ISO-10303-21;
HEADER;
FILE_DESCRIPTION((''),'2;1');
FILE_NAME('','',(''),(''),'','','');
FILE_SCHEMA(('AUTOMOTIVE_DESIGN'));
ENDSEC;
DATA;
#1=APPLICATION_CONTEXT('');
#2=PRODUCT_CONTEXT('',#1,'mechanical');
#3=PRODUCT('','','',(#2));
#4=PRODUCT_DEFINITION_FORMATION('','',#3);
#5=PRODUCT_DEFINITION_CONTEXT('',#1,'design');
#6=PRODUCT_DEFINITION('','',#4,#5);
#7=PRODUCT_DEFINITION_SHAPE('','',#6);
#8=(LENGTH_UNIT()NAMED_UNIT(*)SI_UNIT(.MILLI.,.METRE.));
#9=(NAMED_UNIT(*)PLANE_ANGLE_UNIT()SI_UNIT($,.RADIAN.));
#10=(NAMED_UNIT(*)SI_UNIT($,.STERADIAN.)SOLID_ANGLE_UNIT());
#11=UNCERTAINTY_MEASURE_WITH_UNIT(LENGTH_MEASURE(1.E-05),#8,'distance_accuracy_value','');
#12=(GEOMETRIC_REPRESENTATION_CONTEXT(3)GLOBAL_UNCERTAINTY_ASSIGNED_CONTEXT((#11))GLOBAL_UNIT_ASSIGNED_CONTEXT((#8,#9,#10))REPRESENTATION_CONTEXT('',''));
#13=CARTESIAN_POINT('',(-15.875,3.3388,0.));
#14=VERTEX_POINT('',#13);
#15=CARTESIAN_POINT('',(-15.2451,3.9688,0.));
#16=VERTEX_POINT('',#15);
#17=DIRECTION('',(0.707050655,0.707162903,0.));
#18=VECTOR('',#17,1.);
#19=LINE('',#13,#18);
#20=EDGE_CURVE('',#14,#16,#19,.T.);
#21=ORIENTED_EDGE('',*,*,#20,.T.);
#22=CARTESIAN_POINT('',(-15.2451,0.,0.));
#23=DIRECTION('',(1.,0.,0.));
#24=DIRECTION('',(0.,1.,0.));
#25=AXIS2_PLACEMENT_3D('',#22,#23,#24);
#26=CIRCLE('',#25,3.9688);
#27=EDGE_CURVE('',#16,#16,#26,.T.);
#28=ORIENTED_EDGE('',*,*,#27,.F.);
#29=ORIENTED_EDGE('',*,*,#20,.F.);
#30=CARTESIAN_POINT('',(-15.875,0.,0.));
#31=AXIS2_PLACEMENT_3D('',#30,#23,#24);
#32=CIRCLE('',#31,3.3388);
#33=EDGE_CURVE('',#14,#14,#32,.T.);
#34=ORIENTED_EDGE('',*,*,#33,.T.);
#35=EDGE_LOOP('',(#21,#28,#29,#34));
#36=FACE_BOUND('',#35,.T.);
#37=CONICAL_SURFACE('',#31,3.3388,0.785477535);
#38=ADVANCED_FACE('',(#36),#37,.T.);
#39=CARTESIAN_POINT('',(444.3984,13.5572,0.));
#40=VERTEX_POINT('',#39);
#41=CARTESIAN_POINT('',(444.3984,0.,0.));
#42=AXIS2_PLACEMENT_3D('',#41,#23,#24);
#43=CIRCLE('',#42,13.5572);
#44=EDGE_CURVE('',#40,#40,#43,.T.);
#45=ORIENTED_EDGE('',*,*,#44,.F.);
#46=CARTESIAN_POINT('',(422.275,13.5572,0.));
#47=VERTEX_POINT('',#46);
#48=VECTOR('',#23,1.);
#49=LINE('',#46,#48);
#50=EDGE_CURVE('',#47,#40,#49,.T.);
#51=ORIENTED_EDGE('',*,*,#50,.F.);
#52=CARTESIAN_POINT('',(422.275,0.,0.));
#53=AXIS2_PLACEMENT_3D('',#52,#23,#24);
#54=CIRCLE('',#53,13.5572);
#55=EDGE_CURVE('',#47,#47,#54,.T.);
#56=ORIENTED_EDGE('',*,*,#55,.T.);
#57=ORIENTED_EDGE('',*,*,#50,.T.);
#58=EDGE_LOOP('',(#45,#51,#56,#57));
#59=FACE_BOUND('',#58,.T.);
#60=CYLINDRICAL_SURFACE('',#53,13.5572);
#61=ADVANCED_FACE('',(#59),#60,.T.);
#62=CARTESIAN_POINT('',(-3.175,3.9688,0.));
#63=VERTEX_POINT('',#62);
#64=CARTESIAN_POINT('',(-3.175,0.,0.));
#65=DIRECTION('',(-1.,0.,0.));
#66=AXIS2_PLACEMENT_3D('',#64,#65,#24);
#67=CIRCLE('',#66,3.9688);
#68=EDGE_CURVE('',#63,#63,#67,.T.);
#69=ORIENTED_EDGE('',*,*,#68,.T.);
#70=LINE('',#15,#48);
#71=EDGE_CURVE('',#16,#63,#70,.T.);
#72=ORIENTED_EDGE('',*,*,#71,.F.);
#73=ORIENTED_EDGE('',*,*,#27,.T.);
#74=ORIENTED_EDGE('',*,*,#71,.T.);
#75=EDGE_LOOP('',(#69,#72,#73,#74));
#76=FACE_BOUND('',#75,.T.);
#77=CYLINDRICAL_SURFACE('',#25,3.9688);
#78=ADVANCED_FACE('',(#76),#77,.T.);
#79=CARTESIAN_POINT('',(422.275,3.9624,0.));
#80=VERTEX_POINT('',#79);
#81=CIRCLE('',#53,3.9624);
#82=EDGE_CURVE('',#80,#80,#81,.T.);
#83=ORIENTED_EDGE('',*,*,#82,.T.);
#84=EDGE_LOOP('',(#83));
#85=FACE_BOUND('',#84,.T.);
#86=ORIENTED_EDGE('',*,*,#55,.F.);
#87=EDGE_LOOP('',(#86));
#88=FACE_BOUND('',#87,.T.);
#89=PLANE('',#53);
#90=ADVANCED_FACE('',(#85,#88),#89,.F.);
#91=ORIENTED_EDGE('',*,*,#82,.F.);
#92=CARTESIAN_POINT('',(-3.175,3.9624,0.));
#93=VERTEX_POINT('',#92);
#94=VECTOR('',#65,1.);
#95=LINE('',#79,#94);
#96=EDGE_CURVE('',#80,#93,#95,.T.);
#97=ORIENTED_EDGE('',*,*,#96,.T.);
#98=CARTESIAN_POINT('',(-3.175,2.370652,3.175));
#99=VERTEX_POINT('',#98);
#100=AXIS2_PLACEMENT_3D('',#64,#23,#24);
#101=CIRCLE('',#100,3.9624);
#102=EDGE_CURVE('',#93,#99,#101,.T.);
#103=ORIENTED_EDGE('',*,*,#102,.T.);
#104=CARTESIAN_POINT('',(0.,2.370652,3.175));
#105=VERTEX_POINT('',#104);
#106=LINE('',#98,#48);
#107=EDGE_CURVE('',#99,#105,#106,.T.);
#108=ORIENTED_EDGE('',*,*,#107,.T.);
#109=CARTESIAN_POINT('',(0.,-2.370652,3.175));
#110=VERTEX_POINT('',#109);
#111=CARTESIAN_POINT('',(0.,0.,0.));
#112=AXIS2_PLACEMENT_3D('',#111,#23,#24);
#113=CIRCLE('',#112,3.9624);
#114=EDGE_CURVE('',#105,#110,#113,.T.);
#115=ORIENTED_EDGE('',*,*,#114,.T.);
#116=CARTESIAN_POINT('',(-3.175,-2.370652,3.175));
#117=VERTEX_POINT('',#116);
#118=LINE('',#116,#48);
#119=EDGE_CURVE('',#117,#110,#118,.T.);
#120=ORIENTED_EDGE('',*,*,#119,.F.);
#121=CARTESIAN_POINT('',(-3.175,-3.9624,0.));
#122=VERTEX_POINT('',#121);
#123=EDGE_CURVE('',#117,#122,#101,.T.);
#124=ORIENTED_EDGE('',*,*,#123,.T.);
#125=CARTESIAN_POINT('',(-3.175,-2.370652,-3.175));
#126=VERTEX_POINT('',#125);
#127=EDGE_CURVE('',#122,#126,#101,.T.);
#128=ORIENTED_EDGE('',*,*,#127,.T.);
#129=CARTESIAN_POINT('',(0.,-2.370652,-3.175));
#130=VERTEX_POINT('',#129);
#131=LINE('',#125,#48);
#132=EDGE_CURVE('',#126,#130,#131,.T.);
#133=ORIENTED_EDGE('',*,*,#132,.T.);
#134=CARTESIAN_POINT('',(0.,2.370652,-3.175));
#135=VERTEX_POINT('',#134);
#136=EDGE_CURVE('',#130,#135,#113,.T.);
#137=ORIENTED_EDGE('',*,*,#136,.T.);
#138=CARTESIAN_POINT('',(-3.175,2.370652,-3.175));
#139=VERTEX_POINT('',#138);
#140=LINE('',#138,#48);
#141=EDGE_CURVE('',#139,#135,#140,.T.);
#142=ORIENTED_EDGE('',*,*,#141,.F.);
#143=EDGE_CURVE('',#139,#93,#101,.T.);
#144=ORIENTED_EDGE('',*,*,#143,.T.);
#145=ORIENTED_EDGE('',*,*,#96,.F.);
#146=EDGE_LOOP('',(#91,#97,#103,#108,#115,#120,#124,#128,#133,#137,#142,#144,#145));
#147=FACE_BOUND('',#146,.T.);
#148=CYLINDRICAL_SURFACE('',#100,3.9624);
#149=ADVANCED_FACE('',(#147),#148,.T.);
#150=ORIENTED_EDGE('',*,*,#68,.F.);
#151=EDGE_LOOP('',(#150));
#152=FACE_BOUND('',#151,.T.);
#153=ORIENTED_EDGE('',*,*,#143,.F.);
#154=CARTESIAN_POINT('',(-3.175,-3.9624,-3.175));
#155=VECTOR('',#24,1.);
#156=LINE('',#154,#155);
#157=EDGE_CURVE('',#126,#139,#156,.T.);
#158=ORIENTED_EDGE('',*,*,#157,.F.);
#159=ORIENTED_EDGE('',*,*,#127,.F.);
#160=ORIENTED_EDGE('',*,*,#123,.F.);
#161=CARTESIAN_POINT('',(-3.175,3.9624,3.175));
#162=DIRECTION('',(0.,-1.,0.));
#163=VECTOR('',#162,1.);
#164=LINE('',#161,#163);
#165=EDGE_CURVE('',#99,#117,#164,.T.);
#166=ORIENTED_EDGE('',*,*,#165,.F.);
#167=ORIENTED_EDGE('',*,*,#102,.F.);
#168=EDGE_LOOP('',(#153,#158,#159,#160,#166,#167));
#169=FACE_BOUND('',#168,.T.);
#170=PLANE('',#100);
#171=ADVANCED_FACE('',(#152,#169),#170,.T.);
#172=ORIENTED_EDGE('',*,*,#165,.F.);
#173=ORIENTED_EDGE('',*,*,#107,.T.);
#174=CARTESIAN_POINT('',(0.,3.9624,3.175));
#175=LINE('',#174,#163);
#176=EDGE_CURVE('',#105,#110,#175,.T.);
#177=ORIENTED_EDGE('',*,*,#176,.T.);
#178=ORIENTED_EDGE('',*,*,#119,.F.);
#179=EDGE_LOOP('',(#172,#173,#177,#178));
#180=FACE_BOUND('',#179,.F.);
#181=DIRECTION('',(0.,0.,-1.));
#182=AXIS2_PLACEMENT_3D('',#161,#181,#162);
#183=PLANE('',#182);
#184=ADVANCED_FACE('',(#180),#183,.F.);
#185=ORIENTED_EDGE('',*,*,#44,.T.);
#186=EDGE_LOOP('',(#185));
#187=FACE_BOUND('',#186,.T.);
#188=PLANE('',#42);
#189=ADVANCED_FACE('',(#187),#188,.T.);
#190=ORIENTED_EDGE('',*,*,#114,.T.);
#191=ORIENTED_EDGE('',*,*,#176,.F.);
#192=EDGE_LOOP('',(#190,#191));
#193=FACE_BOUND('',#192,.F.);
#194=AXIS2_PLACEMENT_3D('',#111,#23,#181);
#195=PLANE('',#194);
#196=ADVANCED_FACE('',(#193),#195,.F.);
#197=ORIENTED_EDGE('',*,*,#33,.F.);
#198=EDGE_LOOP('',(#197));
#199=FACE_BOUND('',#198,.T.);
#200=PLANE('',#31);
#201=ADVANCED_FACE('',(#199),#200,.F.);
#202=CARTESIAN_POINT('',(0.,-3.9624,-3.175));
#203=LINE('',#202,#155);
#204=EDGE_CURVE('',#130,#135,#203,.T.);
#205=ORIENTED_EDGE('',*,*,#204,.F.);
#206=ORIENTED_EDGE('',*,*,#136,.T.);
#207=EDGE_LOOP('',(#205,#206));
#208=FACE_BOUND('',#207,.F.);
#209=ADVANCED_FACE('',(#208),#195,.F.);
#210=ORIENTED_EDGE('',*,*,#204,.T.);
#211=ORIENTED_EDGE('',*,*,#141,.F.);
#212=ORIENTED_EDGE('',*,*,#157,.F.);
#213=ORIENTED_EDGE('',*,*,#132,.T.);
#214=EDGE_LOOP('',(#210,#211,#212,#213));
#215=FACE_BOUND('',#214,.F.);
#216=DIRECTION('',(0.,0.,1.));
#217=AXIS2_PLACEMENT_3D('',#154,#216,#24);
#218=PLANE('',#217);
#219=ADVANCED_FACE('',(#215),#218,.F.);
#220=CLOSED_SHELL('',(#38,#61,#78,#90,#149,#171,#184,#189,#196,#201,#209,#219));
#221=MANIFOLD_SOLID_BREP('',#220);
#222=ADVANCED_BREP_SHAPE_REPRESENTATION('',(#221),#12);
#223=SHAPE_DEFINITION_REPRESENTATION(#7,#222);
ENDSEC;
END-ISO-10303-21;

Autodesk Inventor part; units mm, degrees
sketch "Sketch_1" plane through (0, 0, 0) normal (0, 0, 1) x (1, 0, 0)
  line L0 (444.3984, 0) -> (-3.175, 0)
  line L1 (-3.175, 0) -> (-3.175, 3.9624)
  line L2 (-3.175, 3.9624) -> (422.275, 3.9624)
  line L3 (422.275, 3.9624) -> (422.275, 13.5572)
  line L4 (422.275, 13.5572) -> (444.3984, 13.5572)
  line L5 (444.3984, 13.5572) -> (444.3984, 0)
  line L6 (444.3984, 0) -> (-3.175, 0)
revolve "Revolution1" add sketch "Sketch_1" angle 360 about axis through (444.3984, 0, 0) along (1, 0, 0)
sketch "Sketch_3" plane through (0, 0, 0) normal (0, 0, 1) x (1, 0, 0)
  line L0 (-3.175, 0) -> (-15.875, 0)
  line L1 (-15.875, 0) -> (-15.875, 3.3388)
  line L2 (-15.875, 3.3388) -> (-15.2451, 3.9688)
  line L3 (-15.2451, 3.9688) -> (-3.175, 3.9688)
  line L4 (-3.175, 3.9688) -> (-3.175, 0)
  line L5 (-3.175, 0) -> (-15.875, 0)
revolve "Revolution2" add sketch "Sketch_3" angle 360 about axis through (-3.175, 0, 0) along (1, 0, 0)
thread "Thread1" size "5/16-20 UN" class "3A" standard "ANSI Unified Screw Threads" full length
sketch "Sketch_10" plane through (-3.175, 0, 0) normal (1, 0, 0) x (0, 0, -1)
  line L0 (-7.9248, 7.9248) -> (-7.9248, -7.9248)
  line L1 (-7.9248, -7.9248) -> (7.9248, -7.9248)
  line L2 (7.9248, -7.9248) -> (7.9248, 7.9248)
  line L3 (7.9248, 7.9248) -> (-7.9248, 7.9248)
  line L4 (-3.175, 3.9624) -> (-3.175, -3.9624)
  line L5 (-3.175, -3.9624) -> (3.175, -3.9624)
  line L6 (3.175, -3.9624) -> (3.175, 3.9624)
  line L7 (3.175, 3.9624) -> (-3.175, 3.9624)
extrude "Extrusion1" cut sketch "Sketch_10" along normal blind 3.175
ref_plane "rod_cp_XY" through (0, 0, 0) normal (1, 0, 0) x (0, 0, -1)
ref_plane "rod_cp_YZ" through (0, 0, 0) normal (0, 0, -1) x (0, 1, 0)
ref_plane "rod_cp_ZX" through (0, 0, 0) normal (0, 1, 0) x (1, 0, 0)
ref_plane "to_rod_clevis_XY" through (-15.875, 0, 0) normal (1, 0, 0) x (0, 0, -1)
ref_plane "to_rod_clevis_YZ" through (-15.875, 0, 0) normal (0, 0, -1) x (0, 1, 0)
ref_plane "to_rod_clevis_ZX" through (-15.875, 0, 0) normal (0, 1, 0) x (1, 0, 0)
ref_plane "rl2_XY" through (-3.175, 0, 0) normal (1, 0, 0) x (0, 0, -1)
ref_plane "rl2_YZ" through (-3.175, 0, 0) normal (0, 0, -1) x (0, 1, 0)
ref_plane "rl2_ZX" through (-3.175, 0, 0) normal (0, 1, 0) x (1, 0, 0)
ref_plane "rl1_XY" through (-15.875, 0, 0) normal (1, 0, 0) x (0, 0, -1)
ref_plane "rl1_YZ" through (-15.875, 0, 0) normal (0, 0, -1) x (0, 1, 0)
ref_plane "rl1_ZX" through (-15.875, 0, 0) normal (0, 1, 0) x (1, 0, 0)
ref_plane "thd1_XY" through (-15.875, 3.9688, 0) normal (1, 0, 0) x (0, 0, -1)
ref_plane "thd1_YZ" through (-15.875, 3.9688, 0) normal (0, 0, -1) x (0, 1, 0)
ref_plane "thd1_ZX" through (-15.875, 3.9688, 0) normal (0, 1, 0) x (1, 0, 0)
ref_plane "thd2_XY" through (-15.875, -3.9688, 0) normal (1, 0, 0) x (0, 0, -1)
ref_plane "thd2_YZ" through (-15.875, -3.9688, 0) normal (0, 0, -1) x (0, 1, 0)
ref_plane "thd2_ZX" through (-15.875, -3.9688, 0) normal (0, 1, 0) x (1, 0, 0)
ref_plane "dia1_XY" through (-3.175, 3.9624, 0) normal (1, 0, 0) x (0, 0, -1)
ref_plane "dia1_YZ" through (-3.175, 3.9624, 0) normal (0, 0, -1) x (0, 1, 0)
ref_plane "dia1_ZX" through (-3.175, 3.9624, 0) normal (0, 1, 0) x (1, 0, 0)
ref_plane "dia2_XY" through (-3.175, -3.9624, 0) normal (1, 0, 0) x (0, 0, -1)
ref_plane "dia2_YZ" through (-3.175, -3.9624, 0) normal (0, 0, -1) x (0, 1, 0)
ref_plane "dia2_ZX" through (-3.175, -3.9624, 0) normal (0, 1, 0) x (1, 0, 0)
ref_plane "wf1_XY" through (-3.175, 0, 0) normal (1, 0, 0) x (0, 0, -1)
ref_plane "wf1_YZ" through (-3.175, 0, 0) normal (0, 0, -1) x (0, 1, 0)
ref_plane "wf1_ZX" through (-3.175, 0, 0) normal (0, 1, 0) x (1, 0, 0)
ref_plane "wf2_XY" through (0, 0, 0) normal (1, 0, 0) x (0, 0, -1)
ref_plane "wf2_YZ" through (0, 0, 0) normal (0, 0, -1) x (0, 1, 0)
ref_plane "wf2_ZX" through (0, 0, 0) normal (0, 1, 0) x (1, 0, 0)
ref_plane "hh1_XY" through (472.1606, 0, 0) normal (0, 0, 1) x (1, 0, 0)
ref_plane "hh1_YZ" through (472.1606, 0, 0) normal (1, 0, 0) x (0, 1, 0)
ref_plane "hh1_ZX" through (472.1606, 0, 0) normal (0, 1, 0) x (0, 0, 1)
ref_plane "hh2_XY" through (478.5614, 0, 0) normal (0, 0, 1) x (1, 0, 0)
ref_plane "hh2_YZ" through (478.5614, 0, 0) normal (1, 0, 0) x (0, 1, 0)
ref_plane "hh2_ZX" through (478.5614, 0, 0) normal (0, 1, 0) x (0, 0, 1)
ref_plane "dia12_XY" through (0, 0, 14.1351) normal (1, 0, 0) x (0, 0, -1)
ref_plane "dia12_YZ" through (0, 0, 14.1351) normal (0, 0, -1) x (0, 1, 0)
ref_plane "dia12_ZX" through (0, 0, 14.1351) normal (0, 1, 0) x (1, 0, 0)
ref_plane "dia22_XY" through (0, 0, -14.1351) normal (1, 0, 0) x (0, 0, -1)
ref_plane "dia22_YZ" through (0, 0, -14.1351) normal (0, 0, -1) x (0, 1, 0)
ref_plane "dia22_ZX" through (0, 0, -14.1351) normal (0, 1, 0) x (1, 0, 0)
ref_plane "wfw1_XY" through (-3.175, 0, -3.175) normal (0, 1, 0) x (1, 0, 0)
ref_plane "wfw1_YZ" through (-3.175, 0, -3.175) normal (1, 0, 0) x (0, 0, -1)
ref_plane "wfw1_ZX" through (-3.175, 0, -3.175) normal (0, 0, -1) x (0, 1, 0)
ref_plane "wfw2_XY" through (-3.175, 0, 3.175) normal (0, 1, 0) x (1, 0, 0)
ref_plane "wfw2_YZ" through (-3.175, 0, 3.175) normal (1, 0, 0) x (0, 0, -1)
ref_plane "wfw2_ZX" through (-3.175, 0, 3.175) normal (0, 0, -1) x (0, 1, 0)
properties part number "0915-DX0_rod"
